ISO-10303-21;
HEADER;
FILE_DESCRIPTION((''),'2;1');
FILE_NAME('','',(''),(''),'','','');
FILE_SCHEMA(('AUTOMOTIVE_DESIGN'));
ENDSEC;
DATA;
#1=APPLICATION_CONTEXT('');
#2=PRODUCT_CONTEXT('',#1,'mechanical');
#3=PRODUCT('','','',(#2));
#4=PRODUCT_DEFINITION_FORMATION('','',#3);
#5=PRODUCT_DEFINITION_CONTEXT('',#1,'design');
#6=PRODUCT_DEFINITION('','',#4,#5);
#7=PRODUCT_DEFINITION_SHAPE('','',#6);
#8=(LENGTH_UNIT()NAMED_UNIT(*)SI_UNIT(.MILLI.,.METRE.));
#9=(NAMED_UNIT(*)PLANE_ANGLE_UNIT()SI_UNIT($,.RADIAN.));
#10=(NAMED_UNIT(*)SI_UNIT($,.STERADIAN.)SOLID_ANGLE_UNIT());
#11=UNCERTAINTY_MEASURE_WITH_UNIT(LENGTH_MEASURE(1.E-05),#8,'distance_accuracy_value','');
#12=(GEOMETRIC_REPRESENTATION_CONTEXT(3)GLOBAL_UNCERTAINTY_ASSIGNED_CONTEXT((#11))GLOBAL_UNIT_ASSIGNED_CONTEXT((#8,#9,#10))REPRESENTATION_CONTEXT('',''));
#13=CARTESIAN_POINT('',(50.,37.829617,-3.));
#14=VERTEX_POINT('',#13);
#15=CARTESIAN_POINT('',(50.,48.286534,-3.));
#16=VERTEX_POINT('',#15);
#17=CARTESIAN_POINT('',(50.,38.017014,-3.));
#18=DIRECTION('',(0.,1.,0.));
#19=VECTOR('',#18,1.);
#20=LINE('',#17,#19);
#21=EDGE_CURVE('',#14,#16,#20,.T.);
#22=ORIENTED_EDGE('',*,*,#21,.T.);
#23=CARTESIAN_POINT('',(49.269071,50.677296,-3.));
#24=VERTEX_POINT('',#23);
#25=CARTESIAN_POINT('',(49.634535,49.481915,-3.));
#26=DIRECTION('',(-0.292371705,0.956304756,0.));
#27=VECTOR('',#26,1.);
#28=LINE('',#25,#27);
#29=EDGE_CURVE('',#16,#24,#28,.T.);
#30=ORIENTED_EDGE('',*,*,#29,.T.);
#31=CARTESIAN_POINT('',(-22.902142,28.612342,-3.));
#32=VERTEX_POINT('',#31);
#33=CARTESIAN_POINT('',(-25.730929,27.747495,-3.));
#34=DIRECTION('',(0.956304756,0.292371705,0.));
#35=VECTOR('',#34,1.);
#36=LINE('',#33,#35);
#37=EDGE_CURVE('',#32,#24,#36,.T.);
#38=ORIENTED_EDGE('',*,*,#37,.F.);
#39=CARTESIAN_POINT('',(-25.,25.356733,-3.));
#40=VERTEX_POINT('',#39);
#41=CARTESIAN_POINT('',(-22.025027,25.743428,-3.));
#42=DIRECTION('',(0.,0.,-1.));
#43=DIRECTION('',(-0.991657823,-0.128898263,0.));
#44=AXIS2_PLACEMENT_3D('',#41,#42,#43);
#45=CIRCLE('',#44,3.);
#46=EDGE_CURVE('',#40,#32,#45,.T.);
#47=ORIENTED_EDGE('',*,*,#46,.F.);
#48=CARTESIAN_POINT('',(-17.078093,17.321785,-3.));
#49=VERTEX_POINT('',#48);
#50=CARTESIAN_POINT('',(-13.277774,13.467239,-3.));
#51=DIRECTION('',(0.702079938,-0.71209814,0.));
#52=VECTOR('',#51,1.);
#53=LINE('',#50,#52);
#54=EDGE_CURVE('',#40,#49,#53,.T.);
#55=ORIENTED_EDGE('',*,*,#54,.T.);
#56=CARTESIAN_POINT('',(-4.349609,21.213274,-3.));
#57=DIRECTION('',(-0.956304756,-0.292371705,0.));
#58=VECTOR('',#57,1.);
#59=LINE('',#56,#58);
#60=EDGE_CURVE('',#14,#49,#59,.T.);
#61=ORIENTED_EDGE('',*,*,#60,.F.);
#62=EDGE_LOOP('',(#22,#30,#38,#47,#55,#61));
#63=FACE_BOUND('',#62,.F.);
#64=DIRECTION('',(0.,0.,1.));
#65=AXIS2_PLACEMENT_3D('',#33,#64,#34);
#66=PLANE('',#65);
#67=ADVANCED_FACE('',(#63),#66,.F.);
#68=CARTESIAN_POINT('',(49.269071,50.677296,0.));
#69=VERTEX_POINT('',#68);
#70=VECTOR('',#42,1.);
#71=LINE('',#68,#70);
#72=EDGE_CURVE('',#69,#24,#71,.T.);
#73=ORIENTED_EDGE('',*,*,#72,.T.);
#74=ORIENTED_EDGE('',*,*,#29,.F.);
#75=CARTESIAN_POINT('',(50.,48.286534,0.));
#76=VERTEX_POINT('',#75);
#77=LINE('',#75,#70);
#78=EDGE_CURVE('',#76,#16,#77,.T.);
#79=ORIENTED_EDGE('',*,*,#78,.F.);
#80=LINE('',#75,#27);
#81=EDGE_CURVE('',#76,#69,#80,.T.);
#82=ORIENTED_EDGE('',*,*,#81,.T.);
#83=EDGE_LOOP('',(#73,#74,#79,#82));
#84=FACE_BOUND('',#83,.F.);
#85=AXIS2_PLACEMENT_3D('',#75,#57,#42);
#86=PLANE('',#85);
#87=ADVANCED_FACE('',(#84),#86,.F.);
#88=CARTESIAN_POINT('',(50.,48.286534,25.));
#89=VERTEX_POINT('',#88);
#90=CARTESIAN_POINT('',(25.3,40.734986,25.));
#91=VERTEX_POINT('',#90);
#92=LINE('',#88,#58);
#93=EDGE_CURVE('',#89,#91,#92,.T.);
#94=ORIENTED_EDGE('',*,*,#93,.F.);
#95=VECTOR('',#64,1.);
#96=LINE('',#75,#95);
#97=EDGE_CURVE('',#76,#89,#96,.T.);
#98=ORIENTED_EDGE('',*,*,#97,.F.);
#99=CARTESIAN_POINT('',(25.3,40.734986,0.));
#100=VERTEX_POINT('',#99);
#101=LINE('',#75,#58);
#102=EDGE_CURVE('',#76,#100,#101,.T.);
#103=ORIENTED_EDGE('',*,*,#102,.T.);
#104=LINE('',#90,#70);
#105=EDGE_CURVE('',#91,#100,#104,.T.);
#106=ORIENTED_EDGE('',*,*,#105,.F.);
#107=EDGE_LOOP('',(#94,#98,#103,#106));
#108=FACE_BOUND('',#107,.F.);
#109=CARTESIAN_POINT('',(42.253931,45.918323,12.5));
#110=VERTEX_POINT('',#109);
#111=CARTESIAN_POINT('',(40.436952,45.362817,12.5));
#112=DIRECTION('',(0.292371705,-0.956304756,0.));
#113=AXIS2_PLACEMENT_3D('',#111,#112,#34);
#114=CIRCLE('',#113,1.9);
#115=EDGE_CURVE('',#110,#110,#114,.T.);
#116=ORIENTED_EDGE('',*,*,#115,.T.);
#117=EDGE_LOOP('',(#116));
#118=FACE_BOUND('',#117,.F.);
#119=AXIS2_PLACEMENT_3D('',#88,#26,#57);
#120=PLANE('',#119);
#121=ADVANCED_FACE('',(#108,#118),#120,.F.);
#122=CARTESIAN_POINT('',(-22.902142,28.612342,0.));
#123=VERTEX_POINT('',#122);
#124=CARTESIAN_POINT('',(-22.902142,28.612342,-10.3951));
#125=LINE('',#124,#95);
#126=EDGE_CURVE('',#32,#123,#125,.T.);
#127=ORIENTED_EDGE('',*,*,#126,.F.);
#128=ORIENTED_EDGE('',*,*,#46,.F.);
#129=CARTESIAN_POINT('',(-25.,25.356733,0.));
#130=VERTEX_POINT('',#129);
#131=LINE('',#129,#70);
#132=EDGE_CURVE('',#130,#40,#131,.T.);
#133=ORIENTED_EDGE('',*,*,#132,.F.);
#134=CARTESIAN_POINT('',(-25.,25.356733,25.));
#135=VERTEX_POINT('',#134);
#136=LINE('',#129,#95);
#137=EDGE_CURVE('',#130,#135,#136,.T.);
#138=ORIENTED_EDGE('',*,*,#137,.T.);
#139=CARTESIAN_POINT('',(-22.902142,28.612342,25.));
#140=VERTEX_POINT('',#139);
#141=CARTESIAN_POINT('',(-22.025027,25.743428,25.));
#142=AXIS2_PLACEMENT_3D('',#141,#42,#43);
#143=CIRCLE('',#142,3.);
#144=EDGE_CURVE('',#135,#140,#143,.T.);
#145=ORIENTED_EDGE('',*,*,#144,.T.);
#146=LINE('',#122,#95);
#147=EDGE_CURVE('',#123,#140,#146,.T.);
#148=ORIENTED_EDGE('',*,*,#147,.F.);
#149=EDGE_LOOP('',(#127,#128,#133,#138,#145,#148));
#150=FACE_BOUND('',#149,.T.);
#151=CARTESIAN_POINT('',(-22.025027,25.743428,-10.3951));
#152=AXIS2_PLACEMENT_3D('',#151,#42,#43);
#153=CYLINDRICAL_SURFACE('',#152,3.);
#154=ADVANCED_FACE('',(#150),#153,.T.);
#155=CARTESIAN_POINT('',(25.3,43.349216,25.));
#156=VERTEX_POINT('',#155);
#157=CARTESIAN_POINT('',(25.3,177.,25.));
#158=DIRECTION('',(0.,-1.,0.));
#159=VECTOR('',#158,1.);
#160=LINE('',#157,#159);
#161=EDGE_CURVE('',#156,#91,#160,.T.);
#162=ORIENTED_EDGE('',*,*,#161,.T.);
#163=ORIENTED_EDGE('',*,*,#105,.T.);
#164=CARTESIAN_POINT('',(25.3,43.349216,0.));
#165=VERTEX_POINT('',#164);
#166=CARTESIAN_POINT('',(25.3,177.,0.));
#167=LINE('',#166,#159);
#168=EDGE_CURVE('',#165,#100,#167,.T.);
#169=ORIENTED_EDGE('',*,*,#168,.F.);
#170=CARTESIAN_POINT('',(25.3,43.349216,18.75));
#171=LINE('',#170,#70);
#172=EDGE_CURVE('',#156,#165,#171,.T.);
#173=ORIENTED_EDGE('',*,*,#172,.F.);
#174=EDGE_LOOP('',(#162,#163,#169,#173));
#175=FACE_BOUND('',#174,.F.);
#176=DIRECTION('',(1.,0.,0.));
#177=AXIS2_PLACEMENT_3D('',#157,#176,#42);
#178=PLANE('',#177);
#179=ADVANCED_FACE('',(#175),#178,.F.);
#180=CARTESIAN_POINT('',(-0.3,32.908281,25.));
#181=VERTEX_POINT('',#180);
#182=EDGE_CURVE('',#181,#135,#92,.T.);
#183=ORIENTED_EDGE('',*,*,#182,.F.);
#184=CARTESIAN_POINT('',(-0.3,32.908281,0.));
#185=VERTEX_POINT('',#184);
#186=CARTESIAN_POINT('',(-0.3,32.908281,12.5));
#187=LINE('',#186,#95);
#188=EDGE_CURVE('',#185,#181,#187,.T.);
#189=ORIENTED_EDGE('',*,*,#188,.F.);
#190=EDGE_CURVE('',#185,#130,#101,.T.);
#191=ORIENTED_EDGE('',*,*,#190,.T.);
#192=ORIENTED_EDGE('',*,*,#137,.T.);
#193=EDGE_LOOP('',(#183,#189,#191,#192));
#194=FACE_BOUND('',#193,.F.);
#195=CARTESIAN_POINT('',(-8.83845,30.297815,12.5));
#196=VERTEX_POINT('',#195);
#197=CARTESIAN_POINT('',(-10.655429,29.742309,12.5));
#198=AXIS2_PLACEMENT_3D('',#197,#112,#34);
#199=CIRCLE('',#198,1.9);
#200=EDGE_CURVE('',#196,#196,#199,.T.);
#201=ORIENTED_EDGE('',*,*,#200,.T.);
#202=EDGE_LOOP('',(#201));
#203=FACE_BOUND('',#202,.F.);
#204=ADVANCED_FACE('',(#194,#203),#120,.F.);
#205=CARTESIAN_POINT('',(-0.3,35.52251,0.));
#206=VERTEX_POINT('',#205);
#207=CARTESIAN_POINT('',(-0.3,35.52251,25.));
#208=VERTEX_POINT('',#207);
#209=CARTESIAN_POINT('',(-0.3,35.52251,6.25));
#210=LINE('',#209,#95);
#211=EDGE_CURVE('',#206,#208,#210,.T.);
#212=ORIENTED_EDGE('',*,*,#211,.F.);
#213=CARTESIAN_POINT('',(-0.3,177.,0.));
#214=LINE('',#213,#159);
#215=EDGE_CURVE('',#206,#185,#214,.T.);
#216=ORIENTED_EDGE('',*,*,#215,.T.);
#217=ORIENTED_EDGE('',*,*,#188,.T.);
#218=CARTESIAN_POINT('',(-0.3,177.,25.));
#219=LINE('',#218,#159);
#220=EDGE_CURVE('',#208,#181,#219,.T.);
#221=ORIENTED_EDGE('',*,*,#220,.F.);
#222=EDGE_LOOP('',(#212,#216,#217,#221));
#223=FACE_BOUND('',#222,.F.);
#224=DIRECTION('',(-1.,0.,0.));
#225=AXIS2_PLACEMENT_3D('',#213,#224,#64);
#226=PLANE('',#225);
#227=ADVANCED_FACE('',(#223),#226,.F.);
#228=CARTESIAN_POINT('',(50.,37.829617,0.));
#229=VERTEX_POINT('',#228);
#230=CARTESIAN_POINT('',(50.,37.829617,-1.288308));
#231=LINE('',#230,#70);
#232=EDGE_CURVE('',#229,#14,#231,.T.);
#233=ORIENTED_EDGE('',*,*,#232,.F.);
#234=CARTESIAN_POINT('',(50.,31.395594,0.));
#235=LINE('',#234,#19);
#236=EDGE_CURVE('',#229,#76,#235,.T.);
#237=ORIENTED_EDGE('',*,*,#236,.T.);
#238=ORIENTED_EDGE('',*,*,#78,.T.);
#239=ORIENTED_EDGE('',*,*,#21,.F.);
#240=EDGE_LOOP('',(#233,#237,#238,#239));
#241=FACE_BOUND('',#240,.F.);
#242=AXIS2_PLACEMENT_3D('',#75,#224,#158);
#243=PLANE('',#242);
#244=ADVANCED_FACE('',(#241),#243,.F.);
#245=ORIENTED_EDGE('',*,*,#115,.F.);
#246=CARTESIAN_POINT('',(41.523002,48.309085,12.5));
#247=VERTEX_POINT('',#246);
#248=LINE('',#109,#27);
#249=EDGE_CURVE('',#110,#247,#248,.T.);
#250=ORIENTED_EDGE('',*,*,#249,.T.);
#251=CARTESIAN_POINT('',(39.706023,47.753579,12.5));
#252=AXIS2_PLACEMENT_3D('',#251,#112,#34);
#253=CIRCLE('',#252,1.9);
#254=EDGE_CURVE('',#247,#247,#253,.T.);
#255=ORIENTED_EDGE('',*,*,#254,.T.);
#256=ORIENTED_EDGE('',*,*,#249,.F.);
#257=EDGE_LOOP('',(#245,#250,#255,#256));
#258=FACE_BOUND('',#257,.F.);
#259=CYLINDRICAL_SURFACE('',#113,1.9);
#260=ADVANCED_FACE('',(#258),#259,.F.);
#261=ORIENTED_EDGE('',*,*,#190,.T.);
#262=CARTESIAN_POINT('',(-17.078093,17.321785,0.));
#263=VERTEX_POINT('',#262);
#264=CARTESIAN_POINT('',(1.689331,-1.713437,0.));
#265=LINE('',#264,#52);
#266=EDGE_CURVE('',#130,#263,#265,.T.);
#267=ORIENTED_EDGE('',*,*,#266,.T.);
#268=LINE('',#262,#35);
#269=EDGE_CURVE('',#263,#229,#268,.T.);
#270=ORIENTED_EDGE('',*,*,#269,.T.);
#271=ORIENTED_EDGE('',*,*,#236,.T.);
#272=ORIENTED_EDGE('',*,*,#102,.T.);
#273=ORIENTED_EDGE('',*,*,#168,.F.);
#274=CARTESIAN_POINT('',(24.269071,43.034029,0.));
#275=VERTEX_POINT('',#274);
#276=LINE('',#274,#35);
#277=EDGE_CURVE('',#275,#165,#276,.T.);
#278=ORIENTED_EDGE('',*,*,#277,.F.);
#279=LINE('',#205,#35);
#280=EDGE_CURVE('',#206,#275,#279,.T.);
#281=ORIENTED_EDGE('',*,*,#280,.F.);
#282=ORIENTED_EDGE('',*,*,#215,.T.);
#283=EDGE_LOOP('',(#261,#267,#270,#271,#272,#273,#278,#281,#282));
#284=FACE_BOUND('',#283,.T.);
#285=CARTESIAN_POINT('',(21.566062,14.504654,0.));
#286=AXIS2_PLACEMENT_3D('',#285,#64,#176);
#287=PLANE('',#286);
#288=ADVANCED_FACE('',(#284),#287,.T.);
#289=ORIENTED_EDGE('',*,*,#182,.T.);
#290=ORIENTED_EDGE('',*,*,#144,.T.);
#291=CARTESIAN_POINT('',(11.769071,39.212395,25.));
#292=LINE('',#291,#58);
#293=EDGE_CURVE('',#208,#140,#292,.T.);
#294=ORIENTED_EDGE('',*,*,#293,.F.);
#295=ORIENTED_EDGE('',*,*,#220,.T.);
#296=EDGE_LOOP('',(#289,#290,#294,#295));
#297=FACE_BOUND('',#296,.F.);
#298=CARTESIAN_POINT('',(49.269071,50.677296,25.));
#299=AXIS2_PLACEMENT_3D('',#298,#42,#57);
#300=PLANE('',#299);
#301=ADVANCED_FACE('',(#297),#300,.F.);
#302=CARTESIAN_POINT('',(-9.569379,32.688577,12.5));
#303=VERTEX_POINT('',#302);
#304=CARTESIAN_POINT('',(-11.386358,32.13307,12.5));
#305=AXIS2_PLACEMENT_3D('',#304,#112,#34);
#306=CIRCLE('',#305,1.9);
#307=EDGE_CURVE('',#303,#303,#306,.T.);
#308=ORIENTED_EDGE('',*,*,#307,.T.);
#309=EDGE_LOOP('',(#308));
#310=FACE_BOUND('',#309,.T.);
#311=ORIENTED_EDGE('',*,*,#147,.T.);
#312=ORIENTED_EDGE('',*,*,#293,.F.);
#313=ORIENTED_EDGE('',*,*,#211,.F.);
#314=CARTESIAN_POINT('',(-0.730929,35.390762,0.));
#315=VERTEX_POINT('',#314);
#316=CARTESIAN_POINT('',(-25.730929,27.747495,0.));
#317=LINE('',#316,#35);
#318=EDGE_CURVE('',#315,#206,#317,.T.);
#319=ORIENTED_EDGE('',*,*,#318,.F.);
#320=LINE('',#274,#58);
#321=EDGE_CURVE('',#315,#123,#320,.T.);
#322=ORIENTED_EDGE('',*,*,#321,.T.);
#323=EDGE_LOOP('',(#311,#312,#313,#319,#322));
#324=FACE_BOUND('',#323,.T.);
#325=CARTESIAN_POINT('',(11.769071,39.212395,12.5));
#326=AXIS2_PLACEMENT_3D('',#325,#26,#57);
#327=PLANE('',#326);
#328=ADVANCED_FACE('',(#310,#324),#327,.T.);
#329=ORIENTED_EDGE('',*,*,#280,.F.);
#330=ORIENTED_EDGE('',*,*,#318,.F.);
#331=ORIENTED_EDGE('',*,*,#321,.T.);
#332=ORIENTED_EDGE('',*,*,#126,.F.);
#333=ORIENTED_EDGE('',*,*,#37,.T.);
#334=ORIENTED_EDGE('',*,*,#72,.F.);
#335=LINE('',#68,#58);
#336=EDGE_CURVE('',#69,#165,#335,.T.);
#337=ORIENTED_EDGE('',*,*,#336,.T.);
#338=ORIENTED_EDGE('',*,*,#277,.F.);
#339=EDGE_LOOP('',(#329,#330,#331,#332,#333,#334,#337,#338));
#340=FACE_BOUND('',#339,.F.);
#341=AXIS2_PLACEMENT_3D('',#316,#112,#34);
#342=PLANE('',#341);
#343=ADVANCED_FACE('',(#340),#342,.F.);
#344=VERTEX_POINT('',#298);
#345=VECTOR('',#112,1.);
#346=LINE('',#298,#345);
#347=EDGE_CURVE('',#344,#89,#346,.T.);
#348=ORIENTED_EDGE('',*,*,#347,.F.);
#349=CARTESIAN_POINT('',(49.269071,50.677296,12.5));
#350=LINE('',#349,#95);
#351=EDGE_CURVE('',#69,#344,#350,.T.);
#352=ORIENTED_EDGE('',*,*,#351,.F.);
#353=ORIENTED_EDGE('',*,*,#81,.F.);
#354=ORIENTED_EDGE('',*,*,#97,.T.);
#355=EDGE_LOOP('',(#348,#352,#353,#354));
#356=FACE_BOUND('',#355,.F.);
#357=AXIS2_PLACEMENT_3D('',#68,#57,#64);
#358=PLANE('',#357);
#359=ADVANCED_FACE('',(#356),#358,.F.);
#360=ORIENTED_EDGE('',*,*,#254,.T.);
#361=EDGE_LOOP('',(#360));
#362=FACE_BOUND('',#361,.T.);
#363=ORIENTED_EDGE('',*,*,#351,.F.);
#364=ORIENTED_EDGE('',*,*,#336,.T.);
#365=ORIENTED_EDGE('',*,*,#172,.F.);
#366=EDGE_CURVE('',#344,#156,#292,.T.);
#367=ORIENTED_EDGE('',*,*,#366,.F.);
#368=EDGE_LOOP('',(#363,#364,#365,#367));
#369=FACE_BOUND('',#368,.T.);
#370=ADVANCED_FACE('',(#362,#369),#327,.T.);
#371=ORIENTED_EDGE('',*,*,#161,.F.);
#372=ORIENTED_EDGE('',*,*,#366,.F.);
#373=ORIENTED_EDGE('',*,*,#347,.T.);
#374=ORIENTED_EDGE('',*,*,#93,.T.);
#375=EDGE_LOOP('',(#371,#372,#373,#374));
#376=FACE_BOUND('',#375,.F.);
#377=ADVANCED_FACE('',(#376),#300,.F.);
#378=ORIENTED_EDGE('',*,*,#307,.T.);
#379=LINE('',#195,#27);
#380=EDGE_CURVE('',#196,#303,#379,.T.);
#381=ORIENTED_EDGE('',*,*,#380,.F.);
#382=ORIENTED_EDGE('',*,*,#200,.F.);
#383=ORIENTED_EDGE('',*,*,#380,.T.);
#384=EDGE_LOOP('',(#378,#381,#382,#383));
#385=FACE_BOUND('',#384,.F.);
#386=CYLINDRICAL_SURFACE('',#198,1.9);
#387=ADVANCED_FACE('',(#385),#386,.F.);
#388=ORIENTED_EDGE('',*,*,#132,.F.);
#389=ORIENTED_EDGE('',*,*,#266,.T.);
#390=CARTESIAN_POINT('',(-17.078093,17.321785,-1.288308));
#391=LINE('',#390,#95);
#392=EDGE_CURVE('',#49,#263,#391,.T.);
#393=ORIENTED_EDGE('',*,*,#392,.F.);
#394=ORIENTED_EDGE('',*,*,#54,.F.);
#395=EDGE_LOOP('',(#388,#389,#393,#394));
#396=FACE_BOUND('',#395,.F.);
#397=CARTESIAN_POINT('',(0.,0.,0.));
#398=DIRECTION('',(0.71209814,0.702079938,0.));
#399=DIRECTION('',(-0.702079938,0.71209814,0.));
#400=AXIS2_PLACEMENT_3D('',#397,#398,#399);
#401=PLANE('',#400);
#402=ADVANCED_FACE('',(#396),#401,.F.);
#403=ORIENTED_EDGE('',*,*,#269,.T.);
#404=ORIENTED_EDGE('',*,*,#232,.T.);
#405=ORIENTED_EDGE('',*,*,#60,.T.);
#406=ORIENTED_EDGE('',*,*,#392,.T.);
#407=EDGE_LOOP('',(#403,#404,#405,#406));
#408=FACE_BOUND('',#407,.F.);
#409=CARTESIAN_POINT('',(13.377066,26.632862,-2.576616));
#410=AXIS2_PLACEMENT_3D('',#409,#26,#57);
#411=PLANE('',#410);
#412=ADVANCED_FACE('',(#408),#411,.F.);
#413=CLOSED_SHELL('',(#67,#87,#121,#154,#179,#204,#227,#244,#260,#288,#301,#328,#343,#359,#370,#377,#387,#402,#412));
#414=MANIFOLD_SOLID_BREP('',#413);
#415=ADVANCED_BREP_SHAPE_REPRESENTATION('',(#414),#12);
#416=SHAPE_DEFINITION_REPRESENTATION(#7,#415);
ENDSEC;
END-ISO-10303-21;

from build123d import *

# Parameters (mm, degrees)
F0_W         = 25
F0_H         = 33
F1_DEPTH     = 25
F3_DEPTH     = 10
F5_DEPTH     = 81.7
F7_DEPTH     = 10
F9_DEPTH     = 92
F10_W        = 13
F10_H        = 13
F11_DEPTH    = 40
F12_R        = 1.9
F13_DEPTH    = 7
F15_DEPTH    = 2.5
F16_W        = 78.4268817365
F16_H        = 25
F17_DEPTH    = 2.5
F19_DEPTH    = 336
F21_DEPTH    = 25
F23_W        = 90.9570492804
F23_H        = 10.3441323154
F24_DEPTH    = 48.1
F26_DEPTH    = 199
F27_W        = 183.3121031523
F27_H        = 83.9067064226
F28_DEPTH    = 179
F29_T1_DEPTH = 32.3950995948
F29_T3_DEPTH = 10.395099863
F31_DEPTH    = 25
F32_R        = 1.9
F33_DEPTH    = 25


# Not quite as in the source:
# - a fillet or chamfer that OpenCascade refuses, or shapes differently, is made with other operations: its cross-section is extruded or revolved along the edge and cut away or added


with BuildPart() as f1:
    # F0 (on Top) → F1 (new body)
    with BuildSketch(Plane.XY):
        with Locations((12.5, 16.5)):
            Rectangle(F0_W, F0_H)
        Polygon((-25, 25.3567329635), (0, 0), (0, 33), align=None)
        with Locations((37.5, 16.5)):
            Rectangle(F0_W, F0_H)
        Polygon((25, 40.6432670365), (0, 33), (25, 33), align=None)
        Polygon((0, 101.4598330308), (0, 33), (25, 40.6432670365), (25, 101.4598330308), (25, 137), (0, 137), align=None)
        Polygon((25, 40.6432670365), (25, 33), (50, 33), (50, 48.2865340729), align=None)
        Polygon((-25, 131.6860859582), (0, 101.4598330308), (0, 137), align=None)
        Polygon((25, 137), (25, 101.4598330308), (50, 131.6860859582), (50, 147.6278280835), (25, 142.3139140418), align=None)
        Polygon((25, 142.3139140418), (0, 137), (25, 137), align=None)
        Polygon((0, 177), (0, 137), (25, 142.3139140418), (25, 177), align=None)
    extrude(amount=F1_DEPTH)

    # F2 (on face) → F3 (join)
    with BuildSketch(Plane(origin=(0, 0, 0), x_dir=(1, 0, 0), z_dir=(0, 0, -1))):
        Polygon((50, -131.6860859582), (25, -101.4598330308), (0, -101.4598330308), (-25, -131.6860859582), (50, -147.6278280835), align=None)
    extrude(amount=F3_DEPTH)

    # F4 (on face) → F5 (cut, symmetric)
    with BuildSketch(Plane.YZ.offset(25)):
        Polygon((101.4598330308, -21.1370438337), (147.6278330308, -10), (101.4598330308, 0), align=None)
    extrude(amount=F5_DEPTH, both=True, mode=Mode.SUBTRACT)

    # F6 (on face) → F7 (join)
    with BuildSketch(Plane(origin=(0, 0, 0), x_dir=(1, 0, 0), z_dir=(0, 0, -1))):
        Polygon((50, -48.2865340729), (50, 0), (0, 0), (-25, -25.3567329635), align=None)
    extrude(amount=F7_DEPTH)

    # F8 (on face) → F9 (cut)
    with BuildSketch(Plane.YZ.offset(50)):
        Polygon((48.2865340729, -10), (0, 0), (0, -39.534393698), (48.2865340729, -39.534393698), align=None)
    extrude(amount=-F9_DEPTH, mode=Mode.SUBTRACT)

    # F10 (on face) → F11 (cut)
    with BuildSketch(Plane(origin=(0, 177, 0), x_dir=(-1, 0, 0), z_dir=(0, 1, 0))):
        with Locations((-12.5, 12.5)):
            Rectangle(F10_W, F10_H)
    extrude(amount=-F11_DEPTH, mode=Mode.SUBTRACT)

    # F12 (on face) → F13 (cut)
    with BuildSketch(Plane(origin=(-27.8614600507, 131.0778638485, 0), x_dir=(-0.9781476007, -0.2079116908, 0), z_dir=(-0.2079116908, 0.9781476007, 0))):
        with Locations((-18.6253867704, 12.5)):
            Circle(F12_R)
        with BuildLine():
            ThreePointArc((-72.2009313853, 12.5), (-70.3009313853, 10.6), (-68.4009313853, 12.5))
            ThreePointArc((-68.4009313853, 12.5), (-70.3009313853, 14.4), (-72.2009313853, 12.5))
        make_face()
    extrude(amount=-F13_DEPTH, mode=Mode.SUBTRACT)

    # F15 (add): a face of the model
    f15_faces = [f1.faces().sort_by_distance(p)[0] for p in [
        (12.5, 36.8216335182, -0.8588233683),
    ]]
    extrude(f15_faces, amount=F15_DEPTH)

    # F16 (on face) → F17 (join)
    with BuildSketch(Plane(origin=(-9.9576121691, 32.5698818371, 0), x_dir=(-0.956304756, -0.2923717047, 0), z_dir=(-0.2923717047, 0.956304756, 0))):
        with Locations((-22.7194132119, 12.5)):
            Rectangle(F16_W, F16_H)
    extrude(amount=-F17_DEPTH)

    # F18 (on face) → F19 (cut)
    with BuildSketch(Plane(origin=(-9.9576121691, 32.5698818371, 0), x_dir=(-0.956304756, -0.2923717047, 0), z_dir=(-0.2923717047, 0.956304756, 0))):
        Polygon((16.4940276563, -15.7148446888), (16.4940276563, -3), (-61.9328540802, -3), (-74.3611752987, -3), (-74.3611752987, -15.7148446888), align=None)
    extrude(amount=-F19_DEPTH, mode=Mode.SUBTRACT)

    # F20 (on face) → F21 (cut)
    with BuildSketch(Plane.XY.offset(25)):
        Polygon((50, 48.2865340729), (-25, 25.3567329635), (-20.5921567976, -5.8456440456), (63.7660473585, -9.7692795098), align=None)
    extrude(amount=-F21_DEPTH, mode=Mode.SUBTRACT)

    # F23 (on offset) → F24 (cut)
    with BuildSketch(Plane(origin=(-6.30296586, 20.6160723875, 0), x_dir=(-0.956304756, -0.2923717047, 0), z_dir=(-0.2923717047, 0.956304756, 0))):
        with Locations((-20.5792468041, -2.5766163599)):
            Rectangle(F23_W, F23_H)
    extrude(amount=-F24_DEPTH, mode=Mode.SUBTRACT)

    # F25 (on face) → F26 (cut)
    with BuildSketch(Plane(origin=(0, 177, 0), x_dir=(-1, 0, 0), z_dir=(0, 1, 0))):
        Polygon((0.3, 25), (0, 25), (-25, 25), (-25.3, 25), (-25.3, 0), (-25, 0), (0, 0), (0.3, 0), align=None)
    extrude(amount=-F26_DEPTH, mode=Mode.SUBTRACT)

    # F27 (on face) → F28 (cut)
    with BuildSketch(Plane(origin=(-9.9576121691, 32.5698818371, 0), x_dir=(-0.956304756, -0.2923717047, 0), z_dir=(-0.2923717047, 0.956304756, 0))):
        with Locations((-51.5790507197, 11.8016507477)):
            Rectangle(F27_W, F27_H)
    extrude(amount=F28_DEPTH, mode=Mode.SUBTRACT)

    # F29: fillet of radius 3 on 1 edges, made by hand

    # F29_s2 → F29_t1 (cut)
    with BuildSketch(Plane.XY.offset(1.341e-07)):
        with BuildLine():
            ThreePointArc((-25, 25.3567329635), (-24.5468104619, 27.3684218455), (-22.9021416452, 28.6123420192))
            Line((-22.9021416452, 28.6123420192), (-25.7309292618, 27.7474948534))
            Line((-25.7309292618, 27.7474948534), (-25, 25.3567329635))
        make_face()
    extrude(amount=F29_T1_DEPTH, mode=Mode.SUBTRACT)

    # F29_s4 → F29_t3 (cut)
    with BuildSketch(Plane.XY.offset(-10.3950997289)):
        with BuildLine():
            ThreePointArc((-25, 25.3567329635), (-24.5468104619, 27.3684218455), (-22.9021416452, 28.6123420192))
            Line((-22.9021416452, 28.6123420192), (-25.7309292618, 27.7474948534))
            Line((-25.7309292618, 27.7474948534), (-25, 25.3567329635))
        make_face()
    extrude(amount=F29_T3_DEPTH, mode=Mode.SUBTRACT)

    # F30 (on face) → F31 (cut)
    with BuildSketch(Plane(origin=(-9.2266829073, 30.1791199472, 0), x_dir=(0.956304756, 0.2923717047, 0), z_dir=(0.2923717047, -0.956304756, 0))):
        with BuildLine():
            ThreePointArc((-3.3940276563, 12.5), (-1.4940276563, 10.6), (0.4059723437, 12.5))
            ThreePointArc((0.4059723437, 12.5), (-1.4940276563, 14.4), (-3.3940276563, 12.5))
        make_face()
    extrude(amount=-F31_DEPTH, mode=Mode.SUBTRACT)

    # F32 (on face) → F33 (cut)
    with BuildSketch(Plane(origin=(-9.2266829073, 30.1791199472, 0), x_dir=(0.956304756, 0.2923717047, 0), z_dir=(0.2923717047, -0.956304756, 0))):
        with Locations((51.9328540802, 12.5)):
            Circle(F32_R)
    extrude(amount=-F33_DEPTH, mode=Mode.SUBTRACT)


solid = f1.part
